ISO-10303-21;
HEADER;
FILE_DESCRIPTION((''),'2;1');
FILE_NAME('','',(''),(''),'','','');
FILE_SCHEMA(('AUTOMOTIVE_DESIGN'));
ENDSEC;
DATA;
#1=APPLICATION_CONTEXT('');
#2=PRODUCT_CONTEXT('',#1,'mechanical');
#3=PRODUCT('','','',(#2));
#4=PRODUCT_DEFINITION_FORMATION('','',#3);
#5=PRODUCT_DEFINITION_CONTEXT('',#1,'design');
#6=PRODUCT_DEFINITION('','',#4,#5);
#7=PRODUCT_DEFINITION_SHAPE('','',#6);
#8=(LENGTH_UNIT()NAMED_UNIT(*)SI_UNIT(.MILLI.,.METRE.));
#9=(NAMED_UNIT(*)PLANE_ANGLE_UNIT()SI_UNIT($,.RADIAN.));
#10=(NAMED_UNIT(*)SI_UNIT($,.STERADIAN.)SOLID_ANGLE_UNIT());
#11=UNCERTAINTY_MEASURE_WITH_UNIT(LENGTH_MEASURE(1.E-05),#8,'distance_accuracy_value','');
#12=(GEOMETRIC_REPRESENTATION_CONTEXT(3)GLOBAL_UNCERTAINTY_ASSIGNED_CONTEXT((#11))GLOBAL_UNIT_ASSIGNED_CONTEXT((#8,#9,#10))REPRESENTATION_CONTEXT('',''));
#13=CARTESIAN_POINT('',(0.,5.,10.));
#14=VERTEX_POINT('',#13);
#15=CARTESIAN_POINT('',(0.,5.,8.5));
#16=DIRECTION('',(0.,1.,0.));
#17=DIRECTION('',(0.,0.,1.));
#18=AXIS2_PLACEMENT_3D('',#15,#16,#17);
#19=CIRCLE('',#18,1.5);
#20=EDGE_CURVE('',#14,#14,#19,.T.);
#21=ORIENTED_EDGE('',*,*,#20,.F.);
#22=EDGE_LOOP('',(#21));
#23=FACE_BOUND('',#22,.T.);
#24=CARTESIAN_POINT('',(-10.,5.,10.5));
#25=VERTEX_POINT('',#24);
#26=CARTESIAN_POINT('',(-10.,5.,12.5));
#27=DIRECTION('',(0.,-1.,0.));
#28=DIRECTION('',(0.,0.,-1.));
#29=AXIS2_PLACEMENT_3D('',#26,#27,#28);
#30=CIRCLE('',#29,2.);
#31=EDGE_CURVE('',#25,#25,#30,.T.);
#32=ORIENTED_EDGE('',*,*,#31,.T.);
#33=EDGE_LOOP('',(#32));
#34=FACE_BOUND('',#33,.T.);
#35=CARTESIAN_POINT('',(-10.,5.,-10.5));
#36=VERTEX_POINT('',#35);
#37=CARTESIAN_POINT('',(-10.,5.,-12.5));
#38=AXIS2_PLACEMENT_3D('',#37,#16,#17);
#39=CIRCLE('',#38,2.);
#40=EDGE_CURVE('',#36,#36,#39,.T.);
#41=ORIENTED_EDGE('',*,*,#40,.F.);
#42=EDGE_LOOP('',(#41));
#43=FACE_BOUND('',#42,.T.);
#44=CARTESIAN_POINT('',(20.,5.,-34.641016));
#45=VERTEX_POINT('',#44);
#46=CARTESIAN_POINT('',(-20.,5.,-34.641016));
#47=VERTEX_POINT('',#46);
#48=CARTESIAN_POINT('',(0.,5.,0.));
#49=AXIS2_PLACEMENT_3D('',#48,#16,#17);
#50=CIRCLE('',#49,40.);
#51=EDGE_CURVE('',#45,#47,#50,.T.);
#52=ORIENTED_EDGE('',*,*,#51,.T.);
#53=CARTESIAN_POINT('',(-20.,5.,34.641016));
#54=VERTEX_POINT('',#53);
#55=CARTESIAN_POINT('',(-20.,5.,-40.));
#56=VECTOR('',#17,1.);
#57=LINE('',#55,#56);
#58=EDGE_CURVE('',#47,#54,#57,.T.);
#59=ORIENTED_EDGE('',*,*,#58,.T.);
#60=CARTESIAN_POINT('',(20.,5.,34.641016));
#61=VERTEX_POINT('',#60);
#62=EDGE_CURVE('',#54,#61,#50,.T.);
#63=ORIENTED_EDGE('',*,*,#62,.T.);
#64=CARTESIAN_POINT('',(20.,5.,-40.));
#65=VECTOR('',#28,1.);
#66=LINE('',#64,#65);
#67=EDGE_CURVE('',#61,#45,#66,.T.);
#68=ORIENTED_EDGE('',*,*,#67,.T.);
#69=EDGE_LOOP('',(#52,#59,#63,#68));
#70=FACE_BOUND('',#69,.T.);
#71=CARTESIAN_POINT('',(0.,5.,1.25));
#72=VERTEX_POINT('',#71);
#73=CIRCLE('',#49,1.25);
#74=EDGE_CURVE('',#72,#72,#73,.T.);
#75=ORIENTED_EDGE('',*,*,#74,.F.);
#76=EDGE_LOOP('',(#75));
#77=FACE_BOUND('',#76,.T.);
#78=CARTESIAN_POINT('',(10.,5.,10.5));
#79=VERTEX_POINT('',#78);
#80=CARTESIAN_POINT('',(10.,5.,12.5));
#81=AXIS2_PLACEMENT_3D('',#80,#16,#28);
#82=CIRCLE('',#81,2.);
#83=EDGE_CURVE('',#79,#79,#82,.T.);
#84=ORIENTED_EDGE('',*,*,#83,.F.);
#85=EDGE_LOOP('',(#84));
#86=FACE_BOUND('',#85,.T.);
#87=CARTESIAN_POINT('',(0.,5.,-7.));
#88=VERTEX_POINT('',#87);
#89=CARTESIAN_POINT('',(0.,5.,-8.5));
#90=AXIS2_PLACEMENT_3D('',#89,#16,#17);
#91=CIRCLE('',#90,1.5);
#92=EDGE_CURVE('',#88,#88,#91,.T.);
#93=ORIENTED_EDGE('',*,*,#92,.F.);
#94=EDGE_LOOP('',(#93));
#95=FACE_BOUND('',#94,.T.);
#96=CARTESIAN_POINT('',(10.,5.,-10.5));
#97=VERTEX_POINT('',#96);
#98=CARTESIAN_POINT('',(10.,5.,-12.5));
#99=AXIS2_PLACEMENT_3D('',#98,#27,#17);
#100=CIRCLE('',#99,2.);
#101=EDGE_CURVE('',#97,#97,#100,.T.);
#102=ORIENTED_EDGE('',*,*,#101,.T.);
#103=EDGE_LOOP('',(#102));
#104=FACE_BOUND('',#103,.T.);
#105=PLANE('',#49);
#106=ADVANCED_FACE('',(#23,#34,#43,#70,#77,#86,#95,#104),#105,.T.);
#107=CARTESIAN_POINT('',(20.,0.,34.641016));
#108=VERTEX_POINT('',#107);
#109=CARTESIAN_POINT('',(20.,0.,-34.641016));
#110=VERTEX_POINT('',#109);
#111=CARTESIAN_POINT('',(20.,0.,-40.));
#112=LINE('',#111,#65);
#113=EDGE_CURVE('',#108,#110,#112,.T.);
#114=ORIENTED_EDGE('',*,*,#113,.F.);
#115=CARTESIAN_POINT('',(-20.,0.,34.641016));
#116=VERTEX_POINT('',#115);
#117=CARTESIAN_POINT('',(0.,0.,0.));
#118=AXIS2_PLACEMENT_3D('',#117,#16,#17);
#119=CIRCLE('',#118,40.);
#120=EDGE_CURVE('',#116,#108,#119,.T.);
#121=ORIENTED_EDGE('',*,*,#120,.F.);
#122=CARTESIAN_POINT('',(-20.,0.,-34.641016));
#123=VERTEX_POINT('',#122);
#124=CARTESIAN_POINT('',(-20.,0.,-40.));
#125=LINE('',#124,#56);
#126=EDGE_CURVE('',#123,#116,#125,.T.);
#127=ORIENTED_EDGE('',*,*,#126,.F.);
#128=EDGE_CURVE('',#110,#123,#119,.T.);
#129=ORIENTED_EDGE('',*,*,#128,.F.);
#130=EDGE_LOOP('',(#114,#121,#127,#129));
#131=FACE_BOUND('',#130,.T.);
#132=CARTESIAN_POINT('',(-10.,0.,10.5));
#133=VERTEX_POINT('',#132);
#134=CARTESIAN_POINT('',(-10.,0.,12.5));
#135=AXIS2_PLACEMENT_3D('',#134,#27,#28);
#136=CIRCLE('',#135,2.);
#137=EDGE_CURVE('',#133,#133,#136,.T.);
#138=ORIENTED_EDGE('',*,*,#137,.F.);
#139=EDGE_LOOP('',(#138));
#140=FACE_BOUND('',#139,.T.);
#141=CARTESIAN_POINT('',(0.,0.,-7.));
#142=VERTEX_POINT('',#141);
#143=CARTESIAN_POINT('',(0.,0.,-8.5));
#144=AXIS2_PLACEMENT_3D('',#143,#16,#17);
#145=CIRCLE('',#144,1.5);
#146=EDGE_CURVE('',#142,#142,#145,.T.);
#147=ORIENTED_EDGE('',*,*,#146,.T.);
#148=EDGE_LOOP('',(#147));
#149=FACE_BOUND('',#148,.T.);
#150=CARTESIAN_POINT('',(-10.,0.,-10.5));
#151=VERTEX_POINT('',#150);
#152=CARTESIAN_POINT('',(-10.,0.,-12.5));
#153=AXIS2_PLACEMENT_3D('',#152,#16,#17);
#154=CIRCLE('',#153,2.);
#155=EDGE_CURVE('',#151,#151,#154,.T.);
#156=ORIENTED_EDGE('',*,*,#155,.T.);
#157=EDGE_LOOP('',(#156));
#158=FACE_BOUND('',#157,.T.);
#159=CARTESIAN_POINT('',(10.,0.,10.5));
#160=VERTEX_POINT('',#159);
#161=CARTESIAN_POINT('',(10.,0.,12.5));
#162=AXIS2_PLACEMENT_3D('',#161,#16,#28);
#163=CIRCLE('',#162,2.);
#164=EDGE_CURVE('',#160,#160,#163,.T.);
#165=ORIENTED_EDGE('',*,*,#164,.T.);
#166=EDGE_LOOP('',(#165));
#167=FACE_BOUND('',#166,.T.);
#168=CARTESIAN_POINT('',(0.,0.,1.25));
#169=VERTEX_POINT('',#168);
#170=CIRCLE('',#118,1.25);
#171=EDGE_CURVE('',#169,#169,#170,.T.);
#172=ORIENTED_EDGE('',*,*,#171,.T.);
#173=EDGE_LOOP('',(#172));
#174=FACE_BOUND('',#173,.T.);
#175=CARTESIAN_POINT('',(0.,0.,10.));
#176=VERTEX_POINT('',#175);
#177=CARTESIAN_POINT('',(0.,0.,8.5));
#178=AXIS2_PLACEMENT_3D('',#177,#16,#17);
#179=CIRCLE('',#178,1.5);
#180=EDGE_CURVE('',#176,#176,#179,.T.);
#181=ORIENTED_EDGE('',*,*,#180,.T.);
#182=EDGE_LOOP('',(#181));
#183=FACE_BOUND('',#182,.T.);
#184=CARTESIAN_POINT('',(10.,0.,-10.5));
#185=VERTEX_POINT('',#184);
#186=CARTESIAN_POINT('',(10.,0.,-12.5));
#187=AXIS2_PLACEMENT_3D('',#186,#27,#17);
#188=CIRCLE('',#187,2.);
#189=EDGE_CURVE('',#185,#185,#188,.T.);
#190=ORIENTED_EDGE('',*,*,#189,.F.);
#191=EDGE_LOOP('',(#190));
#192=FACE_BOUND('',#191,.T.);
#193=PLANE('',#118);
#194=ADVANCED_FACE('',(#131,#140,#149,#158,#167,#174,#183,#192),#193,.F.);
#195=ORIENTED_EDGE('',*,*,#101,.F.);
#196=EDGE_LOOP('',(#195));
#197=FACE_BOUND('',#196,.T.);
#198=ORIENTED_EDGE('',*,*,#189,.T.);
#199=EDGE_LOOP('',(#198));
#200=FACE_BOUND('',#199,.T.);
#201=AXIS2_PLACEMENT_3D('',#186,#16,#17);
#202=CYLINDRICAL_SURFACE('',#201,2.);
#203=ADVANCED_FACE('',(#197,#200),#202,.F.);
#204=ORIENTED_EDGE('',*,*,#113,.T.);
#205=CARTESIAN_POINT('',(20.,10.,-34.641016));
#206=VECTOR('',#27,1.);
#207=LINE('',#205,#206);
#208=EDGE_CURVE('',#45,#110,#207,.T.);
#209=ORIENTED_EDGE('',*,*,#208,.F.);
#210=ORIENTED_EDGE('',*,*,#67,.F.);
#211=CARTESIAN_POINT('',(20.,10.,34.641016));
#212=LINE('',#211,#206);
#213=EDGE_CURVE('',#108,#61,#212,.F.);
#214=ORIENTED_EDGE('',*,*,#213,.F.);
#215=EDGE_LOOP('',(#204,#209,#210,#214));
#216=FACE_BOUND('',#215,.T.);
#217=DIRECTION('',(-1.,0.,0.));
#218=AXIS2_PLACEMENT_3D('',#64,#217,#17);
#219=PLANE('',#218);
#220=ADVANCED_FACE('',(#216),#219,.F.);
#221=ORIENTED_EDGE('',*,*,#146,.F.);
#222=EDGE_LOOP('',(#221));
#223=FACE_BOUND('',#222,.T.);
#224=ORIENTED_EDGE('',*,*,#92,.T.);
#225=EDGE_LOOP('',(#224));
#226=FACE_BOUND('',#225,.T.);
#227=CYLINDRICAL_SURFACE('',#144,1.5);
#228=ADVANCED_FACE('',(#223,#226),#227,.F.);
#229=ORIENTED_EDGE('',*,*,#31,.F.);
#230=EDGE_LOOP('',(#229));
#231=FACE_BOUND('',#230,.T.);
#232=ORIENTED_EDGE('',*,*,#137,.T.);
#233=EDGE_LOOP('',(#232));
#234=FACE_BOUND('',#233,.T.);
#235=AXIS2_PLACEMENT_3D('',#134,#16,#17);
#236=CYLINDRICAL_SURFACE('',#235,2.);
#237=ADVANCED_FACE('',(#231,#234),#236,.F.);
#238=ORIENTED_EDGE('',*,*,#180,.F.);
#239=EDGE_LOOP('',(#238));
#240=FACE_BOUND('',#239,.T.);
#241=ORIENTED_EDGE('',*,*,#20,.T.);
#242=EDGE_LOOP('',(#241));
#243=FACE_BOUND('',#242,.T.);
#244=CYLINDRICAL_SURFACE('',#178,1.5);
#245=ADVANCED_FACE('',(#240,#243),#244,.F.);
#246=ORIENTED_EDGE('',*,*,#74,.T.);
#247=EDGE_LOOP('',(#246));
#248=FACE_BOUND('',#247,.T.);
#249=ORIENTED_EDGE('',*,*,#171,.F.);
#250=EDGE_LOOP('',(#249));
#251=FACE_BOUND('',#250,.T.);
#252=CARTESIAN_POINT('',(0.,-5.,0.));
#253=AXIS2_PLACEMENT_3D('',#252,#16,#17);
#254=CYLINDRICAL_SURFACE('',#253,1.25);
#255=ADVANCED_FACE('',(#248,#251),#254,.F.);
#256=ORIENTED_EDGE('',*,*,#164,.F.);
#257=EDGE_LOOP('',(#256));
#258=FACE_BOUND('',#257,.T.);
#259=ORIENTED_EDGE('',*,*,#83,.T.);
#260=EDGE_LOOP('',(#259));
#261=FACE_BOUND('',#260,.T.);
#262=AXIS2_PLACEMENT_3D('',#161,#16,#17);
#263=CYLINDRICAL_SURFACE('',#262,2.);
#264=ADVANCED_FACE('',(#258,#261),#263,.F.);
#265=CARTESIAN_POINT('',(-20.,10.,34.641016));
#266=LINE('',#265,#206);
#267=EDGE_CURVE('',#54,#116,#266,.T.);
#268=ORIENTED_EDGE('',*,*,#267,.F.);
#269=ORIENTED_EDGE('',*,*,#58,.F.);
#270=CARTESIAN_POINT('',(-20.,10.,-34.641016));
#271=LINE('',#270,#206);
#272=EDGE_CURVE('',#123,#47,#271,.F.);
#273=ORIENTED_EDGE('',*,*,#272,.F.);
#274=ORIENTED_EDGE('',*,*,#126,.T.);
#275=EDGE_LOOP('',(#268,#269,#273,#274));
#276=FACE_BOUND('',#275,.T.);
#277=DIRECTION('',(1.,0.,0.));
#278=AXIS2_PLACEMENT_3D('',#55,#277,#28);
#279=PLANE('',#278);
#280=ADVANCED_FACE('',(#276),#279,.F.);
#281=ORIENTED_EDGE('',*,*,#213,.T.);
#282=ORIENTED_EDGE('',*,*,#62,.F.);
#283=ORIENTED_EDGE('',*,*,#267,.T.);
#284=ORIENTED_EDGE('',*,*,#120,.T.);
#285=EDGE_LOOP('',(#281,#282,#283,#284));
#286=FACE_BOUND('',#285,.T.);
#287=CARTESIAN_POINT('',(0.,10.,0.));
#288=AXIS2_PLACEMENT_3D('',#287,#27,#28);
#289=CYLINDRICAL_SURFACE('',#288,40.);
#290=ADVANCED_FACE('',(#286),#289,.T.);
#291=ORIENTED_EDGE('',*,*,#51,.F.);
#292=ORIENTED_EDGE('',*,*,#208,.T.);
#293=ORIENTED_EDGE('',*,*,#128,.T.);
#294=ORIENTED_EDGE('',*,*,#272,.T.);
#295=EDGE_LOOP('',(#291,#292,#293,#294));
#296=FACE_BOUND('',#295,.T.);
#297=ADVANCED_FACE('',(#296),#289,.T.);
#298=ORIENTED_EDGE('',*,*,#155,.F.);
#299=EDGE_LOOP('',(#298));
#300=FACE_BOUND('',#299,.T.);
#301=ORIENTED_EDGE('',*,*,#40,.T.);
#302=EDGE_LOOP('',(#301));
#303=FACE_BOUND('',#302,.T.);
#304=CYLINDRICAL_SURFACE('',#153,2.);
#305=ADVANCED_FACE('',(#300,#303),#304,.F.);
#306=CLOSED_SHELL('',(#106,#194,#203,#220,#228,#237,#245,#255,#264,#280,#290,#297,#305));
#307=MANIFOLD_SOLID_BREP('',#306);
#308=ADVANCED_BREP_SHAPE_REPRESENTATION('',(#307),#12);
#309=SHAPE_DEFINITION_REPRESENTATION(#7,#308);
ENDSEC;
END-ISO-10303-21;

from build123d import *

# Parameters (mm, degrees)
ESQUISSE1_W               = 40
ESQUISSE1_H               = 80
BOSS_EXTRU_1_DEPTH        = 5
ESQUISSE2_R               = 1.5
ENL_V_MAT_EXTRU_1_DEPTH   = 5
ENL_V_START               = -5
ENL_V_MAT_EXTRU_5_DEPTH   = 5
ESQUISSE13_R              = 2
ENL_V_MAT_EXTRU_9_DEPTH   = 5
SYM_TRIE6_COPY_1_SKETCH_R = 2
SYM_TRIE6_COPY_1_DEPTH    = 5
ESQUISSE15_R              = 1.25
ENL_V_MAT_EXTRU_10_DEPTH  = 10


# Read off the part's stored shape, not the designer's step: Enlèv. mat.-Extru.5
with BuildPart() as part:
    # Esquisse1 → Boss.-Extru.1 (new body)
    with BuildSketch(Plane(origin=(0, 0, 0), x_dir=(1, 0, 0), z_dir=(0, 1, 0))):
        Rectangle(ESQUISSE1_W, ESQUISSE1_H)
    extrude(amount=BOSS_EXTRU_1_DEPTH)

    # Esquisse2 → Enlèv. mat.-Extru.1 (cut)
    with BuildSketch(Plane(origin=(0, 5, 0), x_dir=(1, 0, 0), z_dir=(0, 1, 0))):
        with Locations(Location((0, 8.5, 0), (0, 0, 270))):
            Circle(ESQUISSE2_R)
        with Locations(Location((0, -8.5, 0), (0, 0, 270))):
            Circle(ESQUISSE2_R)
    extrude(amount=-ENL_V_MAT_EXTRU_1_DEPTH, mode=Mode.SUBTRACT)

    # Enlèv. mat.-Extru.5 outline → Enlèv. mat.-Extru.5 (cut)
    with BuildSketch(Plane(origin=(0, 0, 0), x_dir=(-1, 0, 0), z_dir=(0, -1, 0)).offset(ENL_V_START)):
        with BuildLine():
            ThreePointArc((0, -40), (-10.352761804, -38.637033051), (-20, -34.641016151))
            Line((-20, -34.641016151), (-20, -40))
            Line((-20, -40), (0, -40))
        make_face()
        with BuildLine():
            ThreePointArc((20, -34.641016151), (10.352761804, -38.637033051), (0, -40))
            Line((0, -40), (20, -40))
            Line((20, -40), (20, -34.641016151))
        make_face()
        with BuildLine():
            Line((-20, 40), (-20, 34.641016151))
            ThreePointArc((-20, 34.641016151), (-10.352761804, 38.637033051), (0, 40))
            Line((0, 40), (-20, 40))
        make_face()
        with BuildLine():
            Line((20, 40), (0, 40))
            ThreePointArc((0, 40), (10.352761804, 38.637033051), (20, 34.641016151))
            Line((20, 34.641016151), (20, 40))
        make_face()
    extrude(amount=ENL_V_MAT_EXTRU_5_DEPTH, mode=Mode.SUBTRACT)

    # Esquisse13 → Enlèv. mat.-Extru.9 (cut)
    with BuildSketch(Plane(origin=(0, 5, 0), x_dir=(1, 0, 0), z_dir=(0, 1, 0))):
        with Locations(Location((-10, 12.5, 0), (0, 0, 270))):
            Circle(ESQUISSE13_R)
    enl_v_mat_extru_9 = extrude(amount=-ENL_V_MAT_EXTRU_9_DEPTH, mode=Mode.SUBTRACT)

    # Symétrie5: Enlèv. mat.-Extru.9 across plane
    add(enl_v_mat_extru_9.mirror(Plane(origin=(0, 0, 0), x_dir=(0, 0, 1), z_dir=(1, 0, 0))), mode=Mode.SUBTRACT)

    # Symétrie6: Enlèv. mat.-Extru.9 across plane
    add(enl_v_mat_extru_9.mirror(Plane.XY), mode=Mode.SUBTRACT)

    # Symétrie6 copy 1 sketch → Symétrie6 copy 1 (cut)
    with BuildSketch(Plane(origin=(0, 5, 0), x_dir=(-1, 0, 0), z_dir=(0, 1, 0))):
        with Locations(Location((-10, 12.5, 0), (0, 0, 270))):
            Circle(SYM_TRIE6_COPY_1_SKETCH_R)
    extrude(amount=-SYM_TRIE6_COPY_1_DEPTH, mode=Mode.SUBTRACT)

    # Esquisse15 → Enlèv. mat.-Extru.10 (cut)
    with BuildSketch(Plane(origin=(0, 5, 0), x_dir=(1, 0, 0), z_dir=(0, 1, 0))):
        with Locations(Location((0, 0, 0), (0, 0, 270))):
            Circle(ESQUISSE15_R)
    extrude(amount=-ENL_V_MAT_EXTRU_10_DEPTH, mode=Mode.SUBTRACT)


solid = part.part
